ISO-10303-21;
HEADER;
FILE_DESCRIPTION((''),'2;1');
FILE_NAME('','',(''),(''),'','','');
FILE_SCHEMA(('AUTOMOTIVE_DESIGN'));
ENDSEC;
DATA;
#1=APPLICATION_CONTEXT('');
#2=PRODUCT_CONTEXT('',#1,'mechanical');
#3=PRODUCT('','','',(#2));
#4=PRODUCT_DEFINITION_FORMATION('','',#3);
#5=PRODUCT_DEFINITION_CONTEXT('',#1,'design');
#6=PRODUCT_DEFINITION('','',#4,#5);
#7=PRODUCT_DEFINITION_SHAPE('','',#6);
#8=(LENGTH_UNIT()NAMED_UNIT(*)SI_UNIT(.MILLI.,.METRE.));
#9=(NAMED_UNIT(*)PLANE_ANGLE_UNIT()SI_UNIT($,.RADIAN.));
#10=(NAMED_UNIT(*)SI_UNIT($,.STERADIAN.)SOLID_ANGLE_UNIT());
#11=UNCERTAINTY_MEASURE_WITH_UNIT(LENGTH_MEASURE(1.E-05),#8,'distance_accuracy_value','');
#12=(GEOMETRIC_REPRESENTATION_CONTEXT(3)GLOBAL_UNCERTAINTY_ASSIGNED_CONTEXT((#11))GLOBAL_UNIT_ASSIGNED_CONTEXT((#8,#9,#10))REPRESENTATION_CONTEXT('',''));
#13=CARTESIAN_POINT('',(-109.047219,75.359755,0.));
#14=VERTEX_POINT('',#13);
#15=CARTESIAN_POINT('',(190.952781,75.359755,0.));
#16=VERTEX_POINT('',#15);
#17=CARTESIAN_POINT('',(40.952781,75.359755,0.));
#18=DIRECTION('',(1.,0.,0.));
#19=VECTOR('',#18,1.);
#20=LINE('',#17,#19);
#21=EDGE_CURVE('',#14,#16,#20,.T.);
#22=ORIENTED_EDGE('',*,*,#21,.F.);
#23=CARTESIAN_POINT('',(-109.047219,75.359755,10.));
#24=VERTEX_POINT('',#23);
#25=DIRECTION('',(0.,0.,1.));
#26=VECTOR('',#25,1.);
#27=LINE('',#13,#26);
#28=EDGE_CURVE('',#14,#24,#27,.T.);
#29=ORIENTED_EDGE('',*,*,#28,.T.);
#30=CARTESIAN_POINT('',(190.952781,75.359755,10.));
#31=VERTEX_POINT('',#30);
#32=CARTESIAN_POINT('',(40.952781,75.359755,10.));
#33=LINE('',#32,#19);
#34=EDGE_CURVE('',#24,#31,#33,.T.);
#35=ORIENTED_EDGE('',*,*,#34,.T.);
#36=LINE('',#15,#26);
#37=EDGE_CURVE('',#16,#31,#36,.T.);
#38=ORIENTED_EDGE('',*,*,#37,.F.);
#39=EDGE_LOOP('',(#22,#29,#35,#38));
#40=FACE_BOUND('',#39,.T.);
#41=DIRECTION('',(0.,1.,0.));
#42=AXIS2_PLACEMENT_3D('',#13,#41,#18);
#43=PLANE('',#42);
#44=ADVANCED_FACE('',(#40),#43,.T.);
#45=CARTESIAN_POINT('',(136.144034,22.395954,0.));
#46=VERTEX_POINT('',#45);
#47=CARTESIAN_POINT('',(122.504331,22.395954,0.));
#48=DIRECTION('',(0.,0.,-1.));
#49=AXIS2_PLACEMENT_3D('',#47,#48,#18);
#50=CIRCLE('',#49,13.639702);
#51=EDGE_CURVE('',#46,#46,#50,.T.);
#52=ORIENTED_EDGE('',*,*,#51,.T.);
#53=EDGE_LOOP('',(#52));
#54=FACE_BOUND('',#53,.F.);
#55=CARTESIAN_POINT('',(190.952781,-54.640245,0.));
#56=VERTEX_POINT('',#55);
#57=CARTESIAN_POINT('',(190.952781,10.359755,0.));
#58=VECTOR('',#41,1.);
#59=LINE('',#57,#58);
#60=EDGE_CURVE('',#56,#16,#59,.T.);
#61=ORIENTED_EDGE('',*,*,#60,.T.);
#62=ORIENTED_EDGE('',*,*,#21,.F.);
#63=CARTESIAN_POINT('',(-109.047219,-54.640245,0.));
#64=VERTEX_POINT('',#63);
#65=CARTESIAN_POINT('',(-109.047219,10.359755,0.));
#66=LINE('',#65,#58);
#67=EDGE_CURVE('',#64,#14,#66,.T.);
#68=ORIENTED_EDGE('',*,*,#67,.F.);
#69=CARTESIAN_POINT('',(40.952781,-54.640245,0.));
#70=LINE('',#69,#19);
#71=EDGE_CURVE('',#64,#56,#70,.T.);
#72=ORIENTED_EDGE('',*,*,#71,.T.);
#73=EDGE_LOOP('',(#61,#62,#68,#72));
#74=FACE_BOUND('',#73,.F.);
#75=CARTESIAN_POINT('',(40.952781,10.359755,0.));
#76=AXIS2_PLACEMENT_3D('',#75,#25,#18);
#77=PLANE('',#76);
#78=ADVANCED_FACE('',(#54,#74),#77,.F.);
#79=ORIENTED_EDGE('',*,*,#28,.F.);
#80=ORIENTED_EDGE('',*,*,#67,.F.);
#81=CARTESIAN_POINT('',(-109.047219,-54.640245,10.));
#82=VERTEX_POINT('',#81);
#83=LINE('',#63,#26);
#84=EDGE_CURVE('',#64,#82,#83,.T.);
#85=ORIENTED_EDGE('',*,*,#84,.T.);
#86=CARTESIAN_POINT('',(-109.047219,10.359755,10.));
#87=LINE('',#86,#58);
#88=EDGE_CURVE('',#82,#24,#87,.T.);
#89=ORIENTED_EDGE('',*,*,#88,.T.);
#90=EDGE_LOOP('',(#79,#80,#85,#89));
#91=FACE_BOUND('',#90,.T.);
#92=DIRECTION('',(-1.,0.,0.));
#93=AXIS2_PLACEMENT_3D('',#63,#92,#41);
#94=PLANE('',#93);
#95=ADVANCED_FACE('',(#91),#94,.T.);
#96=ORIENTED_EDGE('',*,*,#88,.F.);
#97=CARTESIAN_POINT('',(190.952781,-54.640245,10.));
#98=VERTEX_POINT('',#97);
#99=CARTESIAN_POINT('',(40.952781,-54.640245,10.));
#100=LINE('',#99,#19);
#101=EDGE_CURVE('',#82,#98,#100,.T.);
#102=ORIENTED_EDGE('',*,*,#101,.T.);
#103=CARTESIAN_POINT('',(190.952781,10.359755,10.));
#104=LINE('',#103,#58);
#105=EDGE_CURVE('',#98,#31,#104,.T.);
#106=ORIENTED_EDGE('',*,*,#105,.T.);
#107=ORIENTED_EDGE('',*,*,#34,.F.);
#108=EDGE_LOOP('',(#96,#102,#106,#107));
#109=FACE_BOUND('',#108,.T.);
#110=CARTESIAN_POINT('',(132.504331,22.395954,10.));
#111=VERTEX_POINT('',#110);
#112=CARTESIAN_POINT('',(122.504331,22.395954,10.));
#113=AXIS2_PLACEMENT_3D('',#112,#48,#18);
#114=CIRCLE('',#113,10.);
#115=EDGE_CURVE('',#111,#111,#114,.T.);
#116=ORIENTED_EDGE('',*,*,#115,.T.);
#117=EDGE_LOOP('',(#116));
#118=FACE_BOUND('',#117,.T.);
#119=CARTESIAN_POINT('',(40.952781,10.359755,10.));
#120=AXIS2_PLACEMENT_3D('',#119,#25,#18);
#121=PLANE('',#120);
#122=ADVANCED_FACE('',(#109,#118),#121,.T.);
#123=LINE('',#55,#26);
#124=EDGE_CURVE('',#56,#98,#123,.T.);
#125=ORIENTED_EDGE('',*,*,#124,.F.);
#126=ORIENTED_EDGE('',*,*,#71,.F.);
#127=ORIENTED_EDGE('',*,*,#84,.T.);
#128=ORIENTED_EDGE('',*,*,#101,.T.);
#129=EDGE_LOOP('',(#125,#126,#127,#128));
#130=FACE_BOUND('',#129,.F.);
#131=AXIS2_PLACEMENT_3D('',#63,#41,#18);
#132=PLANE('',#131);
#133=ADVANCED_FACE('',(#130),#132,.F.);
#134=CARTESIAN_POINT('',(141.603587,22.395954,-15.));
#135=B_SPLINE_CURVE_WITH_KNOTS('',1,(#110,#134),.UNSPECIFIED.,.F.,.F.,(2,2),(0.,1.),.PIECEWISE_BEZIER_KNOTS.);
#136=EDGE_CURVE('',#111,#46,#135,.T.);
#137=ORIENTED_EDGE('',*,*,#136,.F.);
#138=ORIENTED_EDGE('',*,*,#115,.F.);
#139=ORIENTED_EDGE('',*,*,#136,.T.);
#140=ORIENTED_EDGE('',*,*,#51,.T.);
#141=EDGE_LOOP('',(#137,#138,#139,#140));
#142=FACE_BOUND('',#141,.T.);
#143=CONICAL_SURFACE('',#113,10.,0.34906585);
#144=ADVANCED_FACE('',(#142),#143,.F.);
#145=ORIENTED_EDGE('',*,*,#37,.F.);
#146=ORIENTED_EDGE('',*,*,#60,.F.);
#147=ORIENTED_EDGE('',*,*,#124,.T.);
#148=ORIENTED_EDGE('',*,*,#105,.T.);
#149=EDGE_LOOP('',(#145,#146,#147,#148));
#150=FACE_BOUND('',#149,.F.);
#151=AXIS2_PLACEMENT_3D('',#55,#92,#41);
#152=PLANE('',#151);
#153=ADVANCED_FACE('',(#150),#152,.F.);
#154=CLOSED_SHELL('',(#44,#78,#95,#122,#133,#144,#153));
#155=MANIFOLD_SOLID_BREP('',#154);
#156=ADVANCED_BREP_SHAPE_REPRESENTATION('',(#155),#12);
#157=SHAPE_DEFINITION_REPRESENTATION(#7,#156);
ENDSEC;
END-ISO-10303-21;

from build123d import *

# Parameters (mm, degrees)
F0_W     = 300
F0_H     = 130
F1_DEPTH = 10
F2_R     = 10
F3_DEPTH = 25
F3_TAPER = -20


with BuildPart() as f1:
    # F0 (on Top) → F1 (new body)
    with BuildSketch(Plane.XY):
        with Locations((40.9527814948, 10.3597547859)):
            Rectangle(F0_W, F0_H)
    extrude(amount=F1_DEPTH)

    # F2 (on face) → F3 (cut)
    with BuildSketch(Plane.XY.offset(10)):
        with Locations((122.5043311715, 22.395953536)):
            Circle(F2_R)
    extrude(amount=-F3_DEPTH, taper=F3_TAPER, mode=Mode.SUBTRACT)


solid = f1.part
